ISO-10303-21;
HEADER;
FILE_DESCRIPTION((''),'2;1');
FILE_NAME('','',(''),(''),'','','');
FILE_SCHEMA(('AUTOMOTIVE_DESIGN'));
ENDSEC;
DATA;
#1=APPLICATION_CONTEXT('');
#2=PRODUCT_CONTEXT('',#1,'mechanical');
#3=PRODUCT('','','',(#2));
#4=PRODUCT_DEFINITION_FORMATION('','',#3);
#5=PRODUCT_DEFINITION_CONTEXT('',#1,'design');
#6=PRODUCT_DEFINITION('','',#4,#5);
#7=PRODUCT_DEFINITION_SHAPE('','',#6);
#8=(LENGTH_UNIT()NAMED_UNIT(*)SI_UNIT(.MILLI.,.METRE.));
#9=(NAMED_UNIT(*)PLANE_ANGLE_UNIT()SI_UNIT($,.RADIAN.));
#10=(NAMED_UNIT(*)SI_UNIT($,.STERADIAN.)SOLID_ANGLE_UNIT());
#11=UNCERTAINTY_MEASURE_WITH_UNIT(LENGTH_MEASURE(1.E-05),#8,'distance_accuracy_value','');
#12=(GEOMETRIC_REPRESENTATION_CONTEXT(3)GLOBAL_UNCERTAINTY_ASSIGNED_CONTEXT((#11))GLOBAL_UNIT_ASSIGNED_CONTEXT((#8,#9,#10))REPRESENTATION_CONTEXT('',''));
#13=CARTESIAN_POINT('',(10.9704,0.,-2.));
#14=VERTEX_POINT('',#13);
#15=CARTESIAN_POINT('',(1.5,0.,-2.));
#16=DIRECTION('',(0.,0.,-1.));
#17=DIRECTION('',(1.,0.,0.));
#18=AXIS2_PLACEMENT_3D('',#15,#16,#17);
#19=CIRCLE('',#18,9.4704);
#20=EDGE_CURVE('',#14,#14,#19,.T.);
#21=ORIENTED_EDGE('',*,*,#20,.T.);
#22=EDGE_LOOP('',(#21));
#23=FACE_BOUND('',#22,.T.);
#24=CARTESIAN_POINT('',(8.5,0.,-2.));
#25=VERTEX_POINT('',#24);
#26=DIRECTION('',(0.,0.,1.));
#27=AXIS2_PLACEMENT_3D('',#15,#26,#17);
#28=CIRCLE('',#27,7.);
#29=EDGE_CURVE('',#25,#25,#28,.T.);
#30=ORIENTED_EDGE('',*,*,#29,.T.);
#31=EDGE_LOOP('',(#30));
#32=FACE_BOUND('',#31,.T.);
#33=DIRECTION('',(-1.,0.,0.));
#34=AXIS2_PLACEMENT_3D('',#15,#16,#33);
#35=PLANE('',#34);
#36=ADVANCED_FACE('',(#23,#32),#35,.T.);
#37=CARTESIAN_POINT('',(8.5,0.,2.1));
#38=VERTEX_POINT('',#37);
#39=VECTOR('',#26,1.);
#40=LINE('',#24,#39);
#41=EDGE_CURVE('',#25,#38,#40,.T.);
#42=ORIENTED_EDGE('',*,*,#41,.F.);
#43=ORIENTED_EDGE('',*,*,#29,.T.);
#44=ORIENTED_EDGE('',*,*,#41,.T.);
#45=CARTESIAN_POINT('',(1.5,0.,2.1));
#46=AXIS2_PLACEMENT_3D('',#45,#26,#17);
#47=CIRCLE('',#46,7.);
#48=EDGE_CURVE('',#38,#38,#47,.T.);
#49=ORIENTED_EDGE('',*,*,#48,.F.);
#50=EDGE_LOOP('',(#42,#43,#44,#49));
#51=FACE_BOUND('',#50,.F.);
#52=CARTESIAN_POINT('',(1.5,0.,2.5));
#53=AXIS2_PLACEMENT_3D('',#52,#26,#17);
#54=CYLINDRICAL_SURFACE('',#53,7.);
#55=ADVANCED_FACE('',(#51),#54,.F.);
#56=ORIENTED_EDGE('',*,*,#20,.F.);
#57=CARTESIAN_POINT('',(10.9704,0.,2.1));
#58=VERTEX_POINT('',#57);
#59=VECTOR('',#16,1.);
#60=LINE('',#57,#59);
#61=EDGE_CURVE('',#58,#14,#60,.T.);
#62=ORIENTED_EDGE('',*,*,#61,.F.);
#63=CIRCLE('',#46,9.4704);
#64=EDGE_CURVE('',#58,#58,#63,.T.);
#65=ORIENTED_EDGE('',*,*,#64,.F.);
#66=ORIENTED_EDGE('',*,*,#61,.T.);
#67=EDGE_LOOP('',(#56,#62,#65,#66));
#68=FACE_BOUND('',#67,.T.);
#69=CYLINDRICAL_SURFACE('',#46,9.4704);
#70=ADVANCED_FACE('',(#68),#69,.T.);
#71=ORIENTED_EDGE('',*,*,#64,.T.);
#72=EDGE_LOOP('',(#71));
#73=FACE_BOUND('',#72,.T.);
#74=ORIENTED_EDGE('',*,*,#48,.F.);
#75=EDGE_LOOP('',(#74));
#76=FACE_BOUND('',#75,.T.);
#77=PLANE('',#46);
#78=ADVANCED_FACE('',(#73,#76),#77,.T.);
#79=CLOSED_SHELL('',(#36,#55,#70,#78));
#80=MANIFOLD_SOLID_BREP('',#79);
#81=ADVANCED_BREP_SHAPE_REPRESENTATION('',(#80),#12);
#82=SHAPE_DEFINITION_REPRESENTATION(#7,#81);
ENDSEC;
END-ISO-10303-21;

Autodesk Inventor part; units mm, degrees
ref_plane "YZ Plane" through (0, 0, 0) normal (1, 0, 0) x (0, 1, 0)
ref_plane "XZ Plane" through (0, 0, 0) normal (0, 1, 0) x (-1, 0, 0)
ref_plane "XY Plane" through (0, 0, 0) normal (0, 0, 1) x (1, 0, 0)
sketch "Sketch1" plane through (0, 0, 0) normal (0, 0, 1) x (1, 0, 0)
  circle A0 centre (1.5, 0) radius 7 projected
  circle A1 centre (1.5, 0) radius 7 projected
  circle A2 centre (1.5, 0) radius 1.5 projected
  circle A3 centre (1.5, 0) radius 1 projected
  line L0 (16.2929, 8.3594) -> (-3.7046, 8.2678)
  line L1 (1.5, 0) -> (1.462, 8.2914)
  line L2 (1.462, 8.2914) -> (1.4574, 9.2914)
  line L3 (-7.6528, 0.7576) -> (-7.6612, 1.3735) projected
  ellipse E0 centre (-7.4913, -0.0469) end of major axis (-7.487, -1.0469) minor radius 0.015 projected
  ellipse E1 centre (-7.4913, -0.0469) end of major axis (-7.487, -1.0469) minor radius 0.015 projected
  ellipse E2 centre (-7.5641, 0.5606) end of major axis (-7.5648, 0.7606) minor radius 0.0029 (-7.5669, 0.6786) -> (-7.5649, 0.3868) ccw projected
  ellipse E3 centre (-7.607, -0.1095) end of major axis (-7.6033, -1.1095) minor radius 0.0145 projected
  ellipse E4 centre (-7.607, -0.1095) end of major axis (-7.6033, -1.1095) minor radius 0.0145 projected
  ellipse E5 centre (-7.4913, -0.0469) end of major axis (-7.487, -1.0469) minor radius 0.015 projected
  ellipse E6 centre (-7.4369, -0.2282) end of major axis (-7.4378, -0.0282) minor radius 0.003 (-7.4348, -0.4079) -> (-7.4361, -0.0582) ccw projected
  ellipse E7 centre (-7.4913, -0.0469) end of major axis (-7.487, -1.0469) minor radius 0.015 projected
  ellipse E8 centre (-7.4913, -0.0469) end of major axis (-7.487, -1.0469) minor radius 0.015 projected
  ellipse E9 centre (-7.5547, -1.7062) end of major axis (-7.5554, -1.5062) minor radius 0.0029 (-7.5538, -1.906) -> (-7.5527, -1.5926) ccw projected
  ellipse E10 centre (-7.6485, -1.6199) end of major axis (-7.6492, -1.4199) minor radius 0.0029 (-7.6512, -1.502) -> (-7.6479, -1.8195) ccw projected
  line L4 (-7.6369, -1.8711) -> (-7.6479, -1.8195) projected
  ellipse E11 centre (-7.6364, -2.0707) end of major axis (-7.6371, -1.8707) minor radius 0.0029 (-7.6334, -2.1069) -> (-7.6369, -1.8711) ccw projected
  line L5 (-7.6327, -2.8428) -> (-7.6334, -2.1069) projected
  ellipse E12 centre (-7.6297, -2.879) end of major axis (-7.6304, -2.679) minor radius 0.0029 (-7.6327, -2.8428) -> (-7.6279, -3.0648) ccw projected
  line L6 (-7.6189, -2.7874) -> (-7.6279, -3.0648) projected
  ellipse E13 centre (-7.6171, -2.9732) end of major axis (-7.6179, -2.7732) minor radius 0.0029 (-7.6145, -2.9205) -> (-7.6189, -2.7874) ccw projected
  line L7 (-7.609, -3.6423) -> (-7.6145, -2.9205) projected
  ellipse E14 centre (-7.6064, -3.5896) end of major axis (-7.6072, -3.3896) minor radius 0.0029 (-7.609, -3.6423) -> (-7.6038, -3.7248) ccw projected
  line L8 (-7.5985, -3.1734) -> (-7.6038, -3.7248) projected
  ellipse E15 centre (-7.5958, -3.3085) end of major axis (-7.5966, -3.1086) minor radius 0.0029 (-7.5941, -3.1773) -> (-7.5985, -3.1734) ccw projected
  line L9 (-7.585, -3.7421) -> (-7.5941, -3.1773) projected
  ellipse E16 centre (-7.5833, -3.6109) end of major axis (-7.584, -3.4109) minor radius 0.0029 (-7.585, -3.7421) -> (-7.5803, -3.6688) ccw projected
  line L10 (-7.5798, -2.9524) -> (-7.5803, -3.6688) projected
  ellipse E17 centre (-7.5768, -3.0103) end of major axis (-7.5775, -2.8103) minor radius 0.0029 (-7.5763, -2.8266) -> (-7.5798, -2.9524) ccw projected
  line L11 (-7.5652, -3.1224) -> (-7.5763, -2.8266) projected
  ellipse E18 centre (-7.5648, -2.9387) end of major axis (-7.5655, -2.7387) minor radius 0.0029 (-7.5652, -3.1224) -> (-7.562, -2.9078) ccw projected
  line L12 (-7.5664, -2.1685) -> (-7.562, -2.9078) projected
  ellipse E19 centre (-7.5637, -2.1375) end of major axis (-7.5644, -1.9375) minor radius 0.0029 (-7.5645, -1.9377) -> (-7.5664, -2.1685) ccw projected
  line L13 (-7.5538, -1.906) -> (-7.5645, -1.9377) projected
  ellipse E20 centre (-7.5547, -1.7062) end of major axis (-7.5554, -1.5062) minor radius 0.0029 (-7.5538, -1.906) -> (-7.5527, -1.5926) ccw projected
  line L14 (-7.5611, -0.9767) -> (-7.5527, -1.5926) projected
  ellipse E21 centre (-7.5591, -0.8631) end of major axis (-7.5599, -0.6631) minor radius 0.0029 (-7.5612, -0.6867) -> (-7.5611, -0.9767) ccw projected
  line L15 (-7.5529, -0.3338) -> (-7.5612, -0.6867) projected
  ellipse E22 centre (-7.5549, -0.1574) end of major axis (-7.5556, 0.0426) minor radius 0.0029 (-7.5529, -0.3338) -> (-7.5541, 0.0164) ccw projected
  line L16 (-7.5649, 0.3868) -> (-7.5541, 0.0164) projected
  ellipse E23 centre (-7.5641, 0.5606) end of major axis (-7.5648, 0.7606) minor radius 0.0029 (-7.5669, 0.6786) -> (-7.5649, 0.3868) ccw projected
  line L17 (-7.5627, 1.2829) -> (-7.5669, 0.6786) projected
  ellipse E24 centre (-7.5655, 1.4008) end of major axis (-7.5662, 1.6008) minor radius 0.0029 (-7.5627, 1.2829) -> (-7.566, 1.6004) ccw projected
  line L18 (-7.577, 1.652) -> (-7.566, 1.6004) projected
  ellipse E25 centre (-7.5775, 1.8516) end of major axis (-7.5783, 2.0516) minor radius 0.0029 (-7.5805, 1.8878) -> (-7.577, 1.652) ccw projected
  line L19 (-7.5812, 2.6237) -> (-7.5805, 1.8878) projected
  ellipse E26 centre (-7.5842, 2.66) end of major axis (-7.585, 2.86) minor radius 0.0029 (-7.5812, 2.6237) -> (-7.586, 2.8457) ccw projected
  line L20 (-7.595, 2.5683) -> (-7.586, 2.8457) projected
  ellipse E27 centre (-7.5968, 2.7541) end of major axis (-7.5975, 2.9541) minor radius 0.0029 (-7.5994, 2.7014) -> (-7.595, 2.5683) ccw projected
  line L21 (-7.6049, 3.4233) -> (-7.5994, 2.7014) projected
  ellipse E28 centre (-7.6075, 3.3705) end of major axis (-7.6082, 3.5705) minor radius 0.0029 (-7.6049, 3.4233) -> (-7.6101, 3.5057) ccw projected
  line L22 (-7.6154, 2.9543) -> (-7.6101, 3.5057) projected
  ellipse E29 centre (-7.6181, 3.0895) end of major axis (-7.6188, 3.2895) minor radius 0.0029 (-7.6198, 2.9582) -> (-7.6154, 2.9543) ccw projected
  line L23 (-7.629, 3.523) -> (-7.6198, 2.9582) projected
  ellipse E30 centre (-7.6307, 3.3918) end of major axis (-7.6314, 3.5918) minor radius 0.0029 (-7.629, 3.523) -> (-7.6337, 3.4497) ccw projected
  line L24 (-7.6342, 2.7334) -> (-7.6337, 3.4497) projected
  ellipse E31 centre (-7.6372, 2.7912) end of major axis (-7.6379, 2.9912) minor radius 0.0029 (-7.6376, 2.6075) -> (-7.6342, 2.7334) ccw projected
  line L25 (-7.6487, 2.9034) -> (-7.6376, 2.6075) projected
  ellipse E32 centre (-7.6492, 2.7196) end of major axis (-7.6499, 2.9196) minor radius 0.0029 (-7.6487, 2.9034) -> (-7.6519, 2.6887) ccw projected
  line L26 (-7.6475, 1.9494) -> (-7.6519, 2.6887) projected
  ellipse E33 centre (-7.6503, 1.9184) end of major axis (-7.651, 2.1184) minor radius 0.0029 (-7.6494, 1.7186) -> (-7.6475, 1.9494) ccw projected
  line L27 (-7.6601, 1.6869) -> (-7.6494, 1.7186) projected
  ellipse E34 centre (-7.6593, 1.4871) end of major axis (-7.66, 1.6871) minor radius 0.0029 (-7.6601, 1.6869) -> (-7.6612, 1.3735) ccw projected
  line L28 (-7.6528, 0.7576) -> (-7.6612, 1.3735) projected
  ellipse E35 centre (-7.6548, 0.644) end of major axis (-7.6555, 0.844) minor radius 0.0029 (-7.6528, 0.4676) -> (-7.6528, 0.7576) ccw projected
  line L29 (-7.661, 0.1147) -> (-7.6528, 0.4676) projected
  ellipse E36 centre (-7.659, -0.0617) end of major axis (-7.6598, 0.1383) minor radius 0.0029 (-7.661, 0.1147) -> (-7.6598, -0.2354) ccw projected
  line L30 (-7.649, -0.6059) -> (-7.6598, -0.2354) projected
  ellipse E37 centre (-7.6498, -0.7797) end of major axis (-7.6506, -0.5797) minor radius 0.0029 (-7.6471, -0.8977) -> (-7.649, -0.6059) ccw projected
  line L31 (-7.6512, -1.502) -> (-7.6471, -0.8977) projected
  ellipse E38 centre (-7.6485, -1.6199) end of major axis (-7.6492, -1.4199) minor radius 0.0029 (-7.6512, -1.502) -> (-7.6479, -1.8195) ccw projected
  ellipse E39 centre (-7.6485, -1.6199) end of major axis (-7.6492, -1.4199) minor radius 0.0029 (-7.6512, -1.502) -> (-7.6479, -1.8195) ccw projected
  line L32 (-7.5611, -0.9767) -> (-7.5527, -1.5926) projected
  line L33 (-7.5611, -0.9767) -> (-7.5527, -1.5926) projected
  line L34 (-7.5611, -0.9767) -> (-7.5527, -1.5926) projected
  line L35 (-7.5611, -0.9767) -> (-7.5527, -1.5926) projected
  ellipse E40 centre (-7.6498, -0.7797) end of major axis (-7.6506, -0.5797) minor radius 0.0029 (-7.6471, -0.8977) -> (-7.649, -0.6059) ccw projected
  ellipse E41 centre (-7.607, -0.1095) end of major axis (-7.6033, -1.1095) minor radius 0.0145 projected
  line L36 (-7.661, 0.1147) -> (-7.6528, 0.4676) projected
  ellipse E42 centre (-7.5655, 1.4008) end of major axis (-7.5662, 1.6008) minor radius 0.0029 (-7.5627, 1.2829) -> (-7.566, 1.6004) ccw projected
  line L37 (-7.5335, 2.0955) -> (-7.538, 2.8386) projected
  line L38 (-7.5812, 2.6237) -> (-7.5805, 1.8878) projected
  line L39 (-7.5335, 2.0955) -> (-7.538, 2.8386) projected
  ellipse E43 centre (-7.5363, 2.072) end of major axis (-7.5372, 2.272) minor radius 0.003 (-7.5355, 1.872) -> (-7.5335, 2.0955) ccw projected
  line L40 (-7.5467, 1.8682) -> (-7.5355, 1.872) projected
  ellipse E44 centre (-7.5458, 1.6682) end of major axis (-7.5466, 1.8682) minor radius 0.003 (-7.5467, 1.8682) -> (-7.5478, 1.5608) ccw projected
  line L41 (-7.5391, 0.9295) -> (-7.5478, 1.5608) projected
  ellipse E45 centre (-7.5412, 0.8221) end of major axis (-7.542, 1.0221) minor radius 0.003 (-7.5391, 0.6423) -> (-7.5391, 0.9295) ccw projected
  line L42 (-7.5477, 0.3142) -> (-7.5391, 0.6423) projected
  ellipse E46 centre (-7.5456, 0.1345) end of major axis (-7.5465, 0.3345) minor radius 0.003 (-7.5477, 0.3142) -> (-7.5465, -0.0355) ccw projected
  line L43 (-7.5352, -0.43) -> (-7.5465, -0.0355) projected
  ellipse E47 centre (-7.5361, -0.5999) end of major axis (-7.5369, -0.3999) minor radius 0.003 (-7.5332, -0.7238) -> (-7.5352, -0.43) ccw projected
  line L44 (-7.5376, -1.3113) -> (-7.5332, -0.7238) projected
  ellipse E48 centre (-7.5347, -1.4352) end of major axis (-7.5356, -1.2352) minor radius 0.003 (-7.5376, -1.3113) -> (-7.5342, -1.634) ccw projected
  line L45 (-7.5227, -1.7135) -> (-7.5342, -1.634) projected
  ellipse E49 centre (-7.5221, -1.9124) end of major axis (-7.523, -1.7124) minor radius 0.003 (-7.519, -1.9559) -> (-7.5227, -1.7135) ccw projected
  line L46 (-7.5183, -2.6863) -> (-7.519, -1.9559) projected
  ellipse E50 centre (-7.5152, -2.7298) end of major axis (-7.5161, -2.5298) minor radius 0.003 (-7.5183, -2.6863) -> (-7.5134, -2.9182) ccw projected
  line L47 (-7.5039, -2.6669) -> (-7.5134, -2.9182) projected
  ellipse E51 centre (-7.5021, -2.8553) end of major axis (-7.5029, -2.6553) minor radius 0.003 (-7.4994, -2.8098) -> (-7.5039, -2.6669) ccw projected
  line L48 (-7.4937, -3.5386) -> (-7.4994, -2.8098) projected
  ellipse E52 centre (-7.4909, -3.4931) end of major axis (-7.4918, -3.2931) minor radius 0.003 (-7.4937, -3.5386) -> (-7.4882, -3.6337) ccw projected
  line L49 (-7.4826, -3.1014) -> (-7.4882, -3.6337) projected
  ellipse E53 centre (-7.4799, -3.242) end of major axis (-7.4808, -3.042) minor radius 0.003 (-7.4781, -3.1166) -> (-7.4826, -3.1014) ccw projected
  line L50 (-7.4685, -3.6993) -> (-7.4781, -3.1166) projected
  ellipse E54 centre (-7.4668, -3.5738) end of major axis (-7.4676, -3.3738) minor radius 0.003 (-7.4685, -3.6993) -> (-7.4636, -3.6387) ccw projected
  line L51 (-7.4631, -2.9309) -> (-7.4636, -3.6387) projected
  ellipse E55 centre (-7.4599, -2.9959) end of major axis (-7.4608, -2.7959) minor radius 0.003 (-7.4594, -2.8153) -> (-7.4631, -2.9309) ccw projected
  line L52 (-7.4479, -3.1365) -> (-7.4594, -2.8153) projected
  ellipse E56 centre (-7.4474, -2.9559) end of major axis (-7.4483, -2.7559) minor radius 0.003 (-7.4479, -3.1365) -> (-7.4446, -2.9324) ccw projected
  line L53 (-7.4491, -2.1892) -> (-7.4446, -2.9324) projected
  ellipse E57 centre (-7.4462, -2.1657) end of major axis (-7.4471, -1.9657) minor radius 0.003 (-7.4471, -1.9657) -> (-7.4491, -2.1892) ccw projected
  line L54 (-7.4359, -1.9619) -> (-7.4471, -1.9657) projected
  ellipse E58 centre (-7.4368, -1.7619) end of major axis (-7.4376, -1.5619) minor radius 0.003 (-7.4359, -1.9619) -> (-7.4347, -1.6545) ccw projected
  line L55 (-7.4435, -1.0232) -> (-7.4347, -1.6545) projected
  ellipse E59 centre (-7.4414, -0.9158) end of major axis (-7.4423, -0.7158) minor radius 0.003 (-7.4435, -0.736) -> (-7.4435, -1.0232) ccw projected
  line L56 (-7.4348, -0.4079) -> (-7.4435, -0.736) projected
  ellipse E60 centre (-7.4369, -0.2282) end of major axis (-7.4378, -0.0282) minor radius 0.003 (-7.4348, -0.4079) -> (-7.4361, -0.0582) ccw projected
  line L57 (-7.4473, 0.3362) -> (-7.4361, -0.0582) projected
  ellipse E61 centre (-7.4465, 0.5062) end of major axis (-7.4473, 0.7062) minor radius 0.003 (-7.4494, 0.6301) -> (-7.4473, 0.3362) ccw projected
  line L58 (-7.445, 1.2175) -> (-7.4494, 0.6301) projected
  ellipse E62 centre (-7.4478, 1.3414) end of major axis (-7.4487, 1.5414) minor radius 0.003 (-7.445, 1.2175) -> (-7.4484, 1.5403) ccw projected
  line L59 (-7.4599, 1.6198) -> (-7.4484, 1.5403) projected
  ellipse E63 centre (-7.4604, 1.8186) end of major axis (-7.4613, 2.0186) minor radius 0.003 (-7.4635, 1.8622) -> (-7.4599, 1.6198) ccw projected
  line L60 (-7.4642, 2.5926) -> (-7.4635, 1.8622) projected
  ellipse E64 centre (-7.4674, 2.6361) end of major axis (-7.4682, 2.8361) minor radius 0.003 (-7.4642, 2.5926) -> (-7.4692, 2.8245) ccw projected
  line L61 (-7.4787, 2.5732) -> (-7.4692, 2.8245) projected
  ellipse E65 centre (-7.4805, 2.7616) end of major axis (-7.4813, 2.9616) minor radius 0.003 (-7.4832, 2.7161) -> (-7.4787, 2.5732) ccw projected
  line L62 (-7.4889, 3.4448) -> (-7.4832, 2.7161) projected
  ellipse E66 centre (-7.4916, 3.3993) end of major axis (-7.4925, 3.5993) minor radius 0.003 (-7.4889, 3.4448) -> (-7.4944, 3.5399) ccw projected
  line L63 (-7.4999, 3.0077) -> (-7.4944, 3.5399) projected
  ellipse E67 centre (-7.5027, 3.1483) end of major axis (-7.5035, 3.3483) minor radius 0.003 (-7.5045, 3.0228) -> (-7.4999, 3.0077) ccw projected
  line L64 (-7.514, 3.6055) -> (-7.5045, 3.0228) projected
  ellipse E68 centre (-7.5158, 3.48) end of major axis (-7.5167, 3.68) minor radius 0.003 (-7.514, 3.6055) -> (-7.5189, 3.545) ccw projected
  line L65 (-7.5195, 2.8372) -> (-7.5189, 3.545) projected
  ellipse E69 centre (-7.5226, 2.9022) end of major axis (-7.5235, 3.1022) minor radius 0.003 (-7.5231, 2.7216) -> (-7.5195, 2.8372) ccw projected
  line L66 (-7.5346, 3.0428) -> (-7.5231, 2.7216) projected
  ellipse E70 centre (-7.5351, 2.8622) end of major axis (-7.536, 3.0622) minor radius 0.003 (-7.5346, 3.0428) -> (-7.538, 2.8386) ccw projected
  line L67 (-5.5, -0.0031) -> (-7.664, -0.0125)
  circle A4 centre (1.5, 0) radius 9.164
  point P0 (0, 0)
  dimension "d0" = 1
extrude "Extrusion1" add sketch "Sketch1" along normal blind 2.5 contours A0 | L67 L57 E61 L58 E62 L59 E63 L60 A4 L0 L1 A0 | A0 L1 L0 A4 E57 L54 E58 L55 E59 L56 E6 L57 L67 | L67 E0 E46 L42 E45 L41 A4 L60 E63 L59 E62 L58 E61 L57 | L57 E6 L56 E59 L55 E58 L54 E57 A4 E3 L67 E0 | L2 A4 L0 | L0 A4 L2 | L67 E0 | E0 L67 | A4 L29 E36 | L67 E22 L16 E2 L17 E24 A4 L41 E45 L42 E46 | L67 E3 E36 L29 A4 E24 L17 E2 L16 E22 | L67 E3 | E3 A4 L67 | E3 A4 E36 L67 | A2 | A3
sketch "Sketch2" plane through (1.5, 0, 0) normal (0, 0, -1) x (-1, 0, 0)
  circle A0 centre (0, 0) radius 9.164 projected
  circle A1 centre (0, 0) radius 7 projected
  point P0 (1.5, 0)
extrude "Extrusion2" add sketch "Sketch2" along normal blind 2
sketch "Sketch3" plane through (1.5, 0, 2.5) normal (0, 0, 1) x (1, 0, 0)
  circle A0 centre (0, 0) radius 7 projected
  point P0 (-1.5, 0)
extrude "Extrusion3" cut sketch "Sketch3" against normal through all
sketch "Sketch4" plane through (1.5, 0, 2.5) normal (0, 0, 1) x (1, 0, 0)
  circle A0 centre (0, 0) radius 7 projected
  circle A1 centre (0, 0) radius 9.164 projected
  point P0 (-1.5, 0)
extrude "Extrusion4" cut sketch "Sketch4" against normal blind 0.4
sketch "Sketch5" plane through (1.5, 0, 2.1) normal (0, 0, 1) x (1, 0, 0)
  circle A0 centre (0, 0) radius 9.164 projected
  line L0 (-13.1755, -10.8308) -> (6.6487, -8.1853)
  line L1 (0, 0) -> (1.1895, -8.9138)
  line L2 (1.1895, -8.9138) -> (1.1895, -9.6873)
  line L3 (1.1895, -8.9138) -> (1.2928, -9.6873)
  circle A1 centre (0, 0) radius 9.4704
  point P0 (-1.5, 0)
extrude "Extrusion5" add sketch "Sketch5" against normal up to surface (4.1 mm away) contours A0 L0 A1 | A0 L2 A1 L0 | L0 A1 L3 A0 | A0 L3 A1 L2
properties part number "kokool"
